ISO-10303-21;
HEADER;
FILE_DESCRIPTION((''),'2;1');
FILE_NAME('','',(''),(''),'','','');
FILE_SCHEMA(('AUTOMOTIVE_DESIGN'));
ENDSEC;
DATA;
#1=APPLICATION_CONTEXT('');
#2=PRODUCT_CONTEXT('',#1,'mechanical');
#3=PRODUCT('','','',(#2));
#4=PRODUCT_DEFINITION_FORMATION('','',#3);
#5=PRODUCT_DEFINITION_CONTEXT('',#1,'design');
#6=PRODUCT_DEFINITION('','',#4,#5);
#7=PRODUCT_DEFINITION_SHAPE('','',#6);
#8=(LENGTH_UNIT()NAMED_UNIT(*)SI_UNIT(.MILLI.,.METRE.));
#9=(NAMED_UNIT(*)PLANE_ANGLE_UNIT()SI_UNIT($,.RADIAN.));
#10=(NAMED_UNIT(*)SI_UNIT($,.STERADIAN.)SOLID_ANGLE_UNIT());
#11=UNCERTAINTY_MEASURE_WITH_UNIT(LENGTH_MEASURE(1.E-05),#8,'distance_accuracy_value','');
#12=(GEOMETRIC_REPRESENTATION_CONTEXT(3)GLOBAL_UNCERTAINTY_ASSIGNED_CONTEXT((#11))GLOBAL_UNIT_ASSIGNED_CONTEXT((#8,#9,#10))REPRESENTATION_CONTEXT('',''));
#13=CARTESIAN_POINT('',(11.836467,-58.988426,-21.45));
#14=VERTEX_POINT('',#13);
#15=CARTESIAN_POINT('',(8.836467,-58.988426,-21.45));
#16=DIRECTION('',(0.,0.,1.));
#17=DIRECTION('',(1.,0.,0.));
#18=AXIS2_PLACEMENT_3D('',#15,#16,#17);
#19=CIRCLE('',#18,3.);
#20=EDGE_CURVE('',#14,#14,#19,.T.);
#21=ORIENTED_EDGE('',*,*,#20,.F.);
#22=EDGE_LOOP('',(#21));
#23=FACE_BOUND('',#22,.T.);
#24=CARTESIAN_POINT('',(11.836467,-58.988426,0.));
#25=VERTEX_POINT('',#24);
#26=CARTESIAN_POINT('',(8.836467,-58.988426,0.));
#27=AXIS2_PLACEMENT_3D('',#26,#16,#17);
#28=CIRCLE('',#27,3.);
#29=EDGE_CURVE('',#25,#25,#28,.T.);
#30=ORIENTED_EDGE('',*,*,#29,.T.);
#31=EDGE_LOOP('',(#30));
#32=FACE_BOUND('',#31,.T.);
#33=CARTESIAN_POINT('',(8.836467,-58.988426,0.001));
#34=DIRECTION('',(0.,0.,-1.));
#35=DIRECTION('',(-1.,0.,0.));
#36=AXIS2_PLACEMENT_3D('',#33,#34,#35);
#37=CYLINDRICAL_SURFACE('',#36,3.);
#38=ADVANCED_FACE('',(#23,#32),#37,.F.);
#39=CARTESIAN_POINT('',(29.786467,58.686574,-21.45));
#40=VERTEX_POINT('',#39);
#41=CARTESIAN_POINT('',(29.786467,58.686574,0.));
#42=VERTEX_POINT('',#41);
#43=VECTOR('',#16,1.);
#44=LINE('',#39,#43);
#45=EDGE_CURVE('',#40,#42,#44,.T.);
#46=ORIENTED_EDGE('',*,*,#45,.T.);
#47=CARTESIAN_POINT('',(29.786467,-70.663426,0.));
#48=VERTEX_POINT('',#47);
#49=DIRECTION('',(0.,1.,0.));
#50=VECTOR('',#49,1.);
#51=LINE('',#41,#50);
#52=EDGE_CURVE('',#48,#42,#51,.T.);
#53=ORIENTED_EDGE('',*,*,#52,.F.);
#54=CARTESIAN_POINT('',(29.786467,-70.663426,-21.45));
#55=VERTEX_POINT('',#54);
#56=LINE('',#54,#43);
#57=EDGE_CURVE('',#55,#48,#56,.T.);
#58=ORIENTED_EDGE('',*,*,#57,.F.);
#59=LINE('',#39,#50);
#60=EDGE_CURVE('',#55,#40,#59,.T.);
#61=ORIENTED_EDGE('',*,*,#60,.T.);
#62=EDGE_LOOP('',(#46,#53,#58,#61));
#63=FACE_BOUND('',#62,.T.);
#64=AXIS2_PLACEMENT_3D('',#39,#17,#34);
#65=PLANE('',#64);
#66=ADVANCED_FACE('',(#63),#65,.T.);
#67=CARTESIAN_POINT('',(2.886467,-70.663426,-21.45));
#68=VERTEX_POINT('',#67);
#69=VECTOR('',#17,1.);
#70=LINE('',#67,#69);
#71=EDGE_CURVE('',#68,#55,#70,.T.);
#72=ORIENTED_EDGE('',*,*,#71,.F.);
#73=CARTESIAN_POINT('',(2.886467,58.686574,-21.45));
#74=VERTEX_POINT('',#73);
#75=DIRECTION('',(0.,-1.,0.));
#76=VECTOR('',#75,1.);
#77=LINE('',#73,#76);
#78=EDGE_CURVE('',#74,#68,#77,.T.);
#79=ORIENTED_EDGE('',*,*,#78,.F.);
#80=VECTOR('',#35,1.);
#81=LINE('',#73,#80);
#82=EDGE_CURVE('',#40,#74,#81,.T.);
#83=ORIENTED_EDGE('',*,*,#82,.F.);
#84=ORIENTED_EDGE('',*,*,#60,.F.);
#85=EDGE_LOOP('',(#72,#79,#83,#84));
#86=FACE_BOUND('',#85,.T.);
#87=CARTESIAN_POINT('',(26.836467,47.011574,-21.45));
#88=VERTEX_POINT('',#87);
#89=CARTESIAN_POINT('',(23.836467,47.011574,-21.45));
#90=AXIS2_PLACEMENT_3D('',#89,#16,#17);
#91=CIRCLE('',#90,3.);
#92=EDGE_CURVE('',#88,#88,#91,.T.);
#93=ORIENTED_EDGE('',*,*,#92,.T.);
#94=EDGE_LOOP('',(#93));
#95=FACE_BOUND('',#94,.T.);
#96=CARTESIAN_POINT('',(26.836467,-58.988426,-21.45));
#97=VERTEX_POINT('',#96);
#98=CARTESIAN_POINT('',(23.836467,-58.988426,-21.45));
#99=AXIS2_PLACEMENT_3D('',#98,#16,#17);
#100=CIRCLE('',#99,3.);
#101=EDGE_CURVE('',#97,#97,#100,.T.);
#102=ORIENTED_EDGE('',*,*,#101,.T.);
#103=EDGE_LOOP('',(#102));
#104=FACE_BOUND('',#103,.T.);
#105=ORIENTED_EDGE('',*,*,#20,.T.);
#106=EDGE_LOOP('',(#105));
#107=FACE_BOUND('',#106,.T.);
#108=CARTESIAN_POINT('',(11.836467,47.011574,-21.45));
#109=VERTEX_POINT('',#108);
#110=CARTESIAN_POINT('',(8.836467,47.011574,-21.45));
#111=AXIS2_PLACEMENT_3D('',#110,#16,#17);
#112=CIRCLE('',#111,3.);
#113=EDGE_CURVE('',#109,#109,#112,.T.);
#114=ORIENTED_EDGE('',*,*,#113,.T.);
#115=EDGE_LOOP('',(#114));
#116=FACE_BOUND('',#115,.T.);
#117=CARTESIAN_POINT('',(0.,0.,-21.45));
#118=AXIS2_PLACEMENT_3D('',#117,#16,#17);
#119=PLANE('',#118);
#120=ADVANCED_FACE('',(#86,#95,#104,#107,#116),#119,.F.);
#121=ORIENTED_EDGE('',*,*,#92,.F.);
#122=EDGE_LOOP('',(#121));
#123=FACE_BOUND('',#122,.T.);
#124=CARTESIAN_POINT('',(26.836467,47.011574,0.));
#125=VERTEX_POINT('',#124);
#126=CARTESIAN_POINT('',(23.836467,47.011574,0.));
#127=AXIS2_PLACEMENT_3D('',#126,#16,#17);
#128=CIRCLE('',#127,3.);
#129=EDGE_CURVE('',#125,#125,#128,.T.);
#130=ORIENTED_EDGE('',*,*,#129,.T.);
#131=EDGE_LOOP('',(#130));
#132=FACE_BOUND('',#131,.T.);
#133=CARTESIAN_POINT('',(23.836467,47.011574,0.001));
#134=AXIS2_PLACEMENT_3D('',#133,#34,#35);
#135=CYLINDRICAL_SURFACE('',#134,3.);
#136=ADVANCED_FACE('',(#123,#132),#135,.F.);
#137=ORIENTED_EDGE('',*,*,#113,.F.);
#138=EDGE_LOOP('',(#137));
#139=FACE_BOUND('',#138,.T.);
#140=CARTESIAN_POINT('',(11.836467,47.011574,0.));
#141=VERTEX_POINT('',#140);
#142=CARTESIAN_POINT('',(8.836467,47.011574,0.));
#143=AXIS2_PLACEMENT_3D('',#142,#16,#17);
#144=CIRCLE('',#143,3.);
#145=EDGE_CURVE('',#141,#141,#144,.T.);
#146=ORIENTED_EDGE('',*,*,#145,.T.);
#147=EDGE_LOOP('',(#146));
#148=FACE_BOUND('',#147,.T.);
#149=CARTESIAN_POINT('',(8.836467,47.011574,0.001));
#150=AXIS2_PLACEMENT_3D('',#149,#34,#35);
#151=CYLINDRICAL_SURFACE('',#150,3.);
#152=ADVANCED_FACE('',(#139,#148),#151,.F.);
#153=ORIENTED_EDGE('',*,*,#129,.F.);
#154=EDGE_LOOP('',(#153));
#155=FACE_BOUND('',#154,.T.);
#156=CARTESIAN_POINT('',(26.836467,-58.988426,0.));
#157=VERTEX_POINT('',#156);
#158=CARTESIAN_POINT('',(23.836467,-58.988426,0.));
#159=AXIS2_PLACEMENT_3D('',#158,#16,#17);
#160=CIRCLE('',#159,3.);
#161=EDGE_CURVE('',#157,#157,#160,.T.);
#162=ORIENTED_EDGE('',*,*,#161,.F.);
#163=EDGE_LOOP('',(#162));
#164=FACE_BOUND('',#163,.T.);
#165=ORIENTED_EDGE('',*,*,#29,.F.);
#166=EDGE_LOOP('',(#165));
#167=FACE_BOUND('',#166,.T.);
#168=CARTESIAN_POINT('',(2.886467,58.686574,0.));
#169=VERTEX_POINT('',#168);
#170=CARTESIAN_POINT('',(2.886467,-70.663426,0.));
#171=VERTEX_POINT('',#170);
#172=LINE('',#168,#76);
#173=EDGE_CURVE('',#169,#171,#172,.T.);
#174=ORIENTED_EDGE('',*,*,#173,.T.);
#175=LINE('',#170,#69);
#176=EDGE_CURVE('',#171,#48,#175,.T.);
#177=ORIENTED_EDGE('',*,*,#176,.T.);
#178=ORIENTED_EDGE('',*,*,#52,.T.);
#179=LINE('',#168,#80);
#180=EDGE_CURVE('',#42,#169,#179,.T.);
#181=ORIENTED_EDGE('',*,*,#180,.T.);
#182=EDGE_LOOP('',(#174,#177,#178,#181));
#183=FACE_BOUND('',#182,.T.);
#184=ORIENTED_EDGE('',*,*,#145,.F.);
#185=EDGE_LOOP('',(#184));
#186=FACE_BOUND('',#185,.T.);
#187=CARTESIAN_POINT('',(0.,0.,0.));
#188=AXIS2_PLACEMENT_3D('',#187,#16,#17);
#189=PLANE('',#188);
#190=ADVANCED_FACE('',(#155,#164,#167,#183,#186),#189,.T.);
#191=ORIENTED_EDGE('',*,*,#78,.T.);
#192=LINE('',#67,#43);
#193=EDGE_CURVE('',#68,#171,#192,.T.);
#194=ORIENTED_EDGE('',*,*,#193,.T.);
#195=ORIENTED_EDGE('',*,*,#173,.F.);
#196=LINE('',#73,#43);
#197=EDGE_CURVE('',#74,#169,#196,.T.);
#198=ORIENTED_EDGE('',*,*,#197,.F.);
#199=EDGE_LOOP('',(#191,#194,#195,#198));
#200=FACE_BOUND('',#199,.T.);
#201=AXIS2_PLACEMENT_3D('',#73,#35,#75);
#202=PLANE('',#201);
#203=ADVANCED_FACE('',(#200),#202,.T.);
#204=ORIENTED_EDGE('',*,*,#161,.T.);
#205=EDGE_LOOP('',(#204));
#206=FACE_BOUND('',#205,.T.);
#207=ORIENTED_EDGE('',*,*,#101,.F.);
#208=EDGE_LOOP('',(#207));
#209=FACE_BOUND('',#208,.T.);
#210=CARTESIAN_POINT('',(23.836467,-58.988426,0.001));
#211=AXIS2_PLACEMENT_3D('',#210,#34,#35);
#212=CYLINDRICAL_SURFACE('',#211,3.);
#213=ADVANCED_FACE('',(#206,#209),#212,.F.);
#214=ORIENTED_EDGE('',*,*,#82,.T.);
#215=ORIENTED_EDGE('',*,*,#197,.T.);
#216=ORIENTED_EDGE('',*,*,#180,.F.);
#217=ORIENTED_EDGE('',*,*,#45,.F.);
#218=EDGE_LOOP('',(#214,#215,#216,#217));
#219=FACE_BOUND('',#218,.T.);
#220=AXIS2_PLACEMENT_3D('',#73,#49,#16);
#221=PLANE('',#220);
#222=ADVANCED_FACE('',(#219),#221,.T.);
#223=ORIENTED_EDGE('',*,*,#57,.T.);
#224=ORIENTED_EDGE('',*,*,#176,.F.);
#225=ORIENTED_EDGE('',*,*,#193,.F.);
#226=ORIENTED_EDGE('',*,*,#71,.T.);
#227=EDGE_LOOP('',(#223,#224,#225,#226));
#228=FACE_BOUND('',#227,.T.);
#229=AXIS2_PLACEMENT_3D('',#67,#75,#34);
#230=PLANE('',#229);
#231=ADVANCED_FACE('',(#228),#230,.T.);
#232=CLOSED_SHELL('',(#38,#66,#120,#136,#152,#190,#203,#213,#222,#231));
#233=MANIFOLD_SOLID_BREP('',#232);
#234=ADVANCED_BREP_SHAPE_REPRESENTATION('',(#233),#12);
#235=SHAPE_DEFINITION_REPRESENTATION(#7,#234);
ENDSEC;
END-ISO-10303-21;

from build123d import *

# Parameters (mm, degrees)
ESBO_O1_W             = 26.9
ESBO_O1_H             = 129.35
FLANGE_BASE1_DEPTH    = 21.45
ESBO_O7_R             = 3
CORTE_EXTRUS_O1_DEPTH = 21.45


# Sheet-metal steps are written as plain solids
with BuildPart() as part:
    # Esboço1 → Flange-base1 (new body)
    with BuildSketch(Plane.XY):
        with Locations((16.336467182, -5.988425926)):
            Rectangle(ESBO_O1_W, ESBO_O1_H)
    extrude(amount=-FLANGE_BASE1_DEPTH)

    # Esboço7 → Corte-extrusão1 (cut)
    with BuildSketch(Plane(origin=(0, 0, -21.45), x_dir=(-1, 0, 0), z_dir=(0, 0, -1))):
        with Locations(Location((-23.836467182, 47.011574074, 0), (0, 0, 180))):
            Circle(ESBO_O7_R)
        with Locations(Location((-8.836467182, 47.011574074, 0), (0, 0, 180))):
            Circle(ESBO_O7_R)
        with Locations(Location((-23.836467182, -58.988425926, 0), (0, 0, 180))):
            Circle(ESBO_O7_R)
        with Locations(Location((-8.836467182, -58.988425926, 0), (0, 0, 180))):
            Circle(ESBO_O7_R)
    extrude(amount=-CORTE_EXTRUS_O1_DEPTH, mode=Mode.SUBTRACT)


solid = part.part
